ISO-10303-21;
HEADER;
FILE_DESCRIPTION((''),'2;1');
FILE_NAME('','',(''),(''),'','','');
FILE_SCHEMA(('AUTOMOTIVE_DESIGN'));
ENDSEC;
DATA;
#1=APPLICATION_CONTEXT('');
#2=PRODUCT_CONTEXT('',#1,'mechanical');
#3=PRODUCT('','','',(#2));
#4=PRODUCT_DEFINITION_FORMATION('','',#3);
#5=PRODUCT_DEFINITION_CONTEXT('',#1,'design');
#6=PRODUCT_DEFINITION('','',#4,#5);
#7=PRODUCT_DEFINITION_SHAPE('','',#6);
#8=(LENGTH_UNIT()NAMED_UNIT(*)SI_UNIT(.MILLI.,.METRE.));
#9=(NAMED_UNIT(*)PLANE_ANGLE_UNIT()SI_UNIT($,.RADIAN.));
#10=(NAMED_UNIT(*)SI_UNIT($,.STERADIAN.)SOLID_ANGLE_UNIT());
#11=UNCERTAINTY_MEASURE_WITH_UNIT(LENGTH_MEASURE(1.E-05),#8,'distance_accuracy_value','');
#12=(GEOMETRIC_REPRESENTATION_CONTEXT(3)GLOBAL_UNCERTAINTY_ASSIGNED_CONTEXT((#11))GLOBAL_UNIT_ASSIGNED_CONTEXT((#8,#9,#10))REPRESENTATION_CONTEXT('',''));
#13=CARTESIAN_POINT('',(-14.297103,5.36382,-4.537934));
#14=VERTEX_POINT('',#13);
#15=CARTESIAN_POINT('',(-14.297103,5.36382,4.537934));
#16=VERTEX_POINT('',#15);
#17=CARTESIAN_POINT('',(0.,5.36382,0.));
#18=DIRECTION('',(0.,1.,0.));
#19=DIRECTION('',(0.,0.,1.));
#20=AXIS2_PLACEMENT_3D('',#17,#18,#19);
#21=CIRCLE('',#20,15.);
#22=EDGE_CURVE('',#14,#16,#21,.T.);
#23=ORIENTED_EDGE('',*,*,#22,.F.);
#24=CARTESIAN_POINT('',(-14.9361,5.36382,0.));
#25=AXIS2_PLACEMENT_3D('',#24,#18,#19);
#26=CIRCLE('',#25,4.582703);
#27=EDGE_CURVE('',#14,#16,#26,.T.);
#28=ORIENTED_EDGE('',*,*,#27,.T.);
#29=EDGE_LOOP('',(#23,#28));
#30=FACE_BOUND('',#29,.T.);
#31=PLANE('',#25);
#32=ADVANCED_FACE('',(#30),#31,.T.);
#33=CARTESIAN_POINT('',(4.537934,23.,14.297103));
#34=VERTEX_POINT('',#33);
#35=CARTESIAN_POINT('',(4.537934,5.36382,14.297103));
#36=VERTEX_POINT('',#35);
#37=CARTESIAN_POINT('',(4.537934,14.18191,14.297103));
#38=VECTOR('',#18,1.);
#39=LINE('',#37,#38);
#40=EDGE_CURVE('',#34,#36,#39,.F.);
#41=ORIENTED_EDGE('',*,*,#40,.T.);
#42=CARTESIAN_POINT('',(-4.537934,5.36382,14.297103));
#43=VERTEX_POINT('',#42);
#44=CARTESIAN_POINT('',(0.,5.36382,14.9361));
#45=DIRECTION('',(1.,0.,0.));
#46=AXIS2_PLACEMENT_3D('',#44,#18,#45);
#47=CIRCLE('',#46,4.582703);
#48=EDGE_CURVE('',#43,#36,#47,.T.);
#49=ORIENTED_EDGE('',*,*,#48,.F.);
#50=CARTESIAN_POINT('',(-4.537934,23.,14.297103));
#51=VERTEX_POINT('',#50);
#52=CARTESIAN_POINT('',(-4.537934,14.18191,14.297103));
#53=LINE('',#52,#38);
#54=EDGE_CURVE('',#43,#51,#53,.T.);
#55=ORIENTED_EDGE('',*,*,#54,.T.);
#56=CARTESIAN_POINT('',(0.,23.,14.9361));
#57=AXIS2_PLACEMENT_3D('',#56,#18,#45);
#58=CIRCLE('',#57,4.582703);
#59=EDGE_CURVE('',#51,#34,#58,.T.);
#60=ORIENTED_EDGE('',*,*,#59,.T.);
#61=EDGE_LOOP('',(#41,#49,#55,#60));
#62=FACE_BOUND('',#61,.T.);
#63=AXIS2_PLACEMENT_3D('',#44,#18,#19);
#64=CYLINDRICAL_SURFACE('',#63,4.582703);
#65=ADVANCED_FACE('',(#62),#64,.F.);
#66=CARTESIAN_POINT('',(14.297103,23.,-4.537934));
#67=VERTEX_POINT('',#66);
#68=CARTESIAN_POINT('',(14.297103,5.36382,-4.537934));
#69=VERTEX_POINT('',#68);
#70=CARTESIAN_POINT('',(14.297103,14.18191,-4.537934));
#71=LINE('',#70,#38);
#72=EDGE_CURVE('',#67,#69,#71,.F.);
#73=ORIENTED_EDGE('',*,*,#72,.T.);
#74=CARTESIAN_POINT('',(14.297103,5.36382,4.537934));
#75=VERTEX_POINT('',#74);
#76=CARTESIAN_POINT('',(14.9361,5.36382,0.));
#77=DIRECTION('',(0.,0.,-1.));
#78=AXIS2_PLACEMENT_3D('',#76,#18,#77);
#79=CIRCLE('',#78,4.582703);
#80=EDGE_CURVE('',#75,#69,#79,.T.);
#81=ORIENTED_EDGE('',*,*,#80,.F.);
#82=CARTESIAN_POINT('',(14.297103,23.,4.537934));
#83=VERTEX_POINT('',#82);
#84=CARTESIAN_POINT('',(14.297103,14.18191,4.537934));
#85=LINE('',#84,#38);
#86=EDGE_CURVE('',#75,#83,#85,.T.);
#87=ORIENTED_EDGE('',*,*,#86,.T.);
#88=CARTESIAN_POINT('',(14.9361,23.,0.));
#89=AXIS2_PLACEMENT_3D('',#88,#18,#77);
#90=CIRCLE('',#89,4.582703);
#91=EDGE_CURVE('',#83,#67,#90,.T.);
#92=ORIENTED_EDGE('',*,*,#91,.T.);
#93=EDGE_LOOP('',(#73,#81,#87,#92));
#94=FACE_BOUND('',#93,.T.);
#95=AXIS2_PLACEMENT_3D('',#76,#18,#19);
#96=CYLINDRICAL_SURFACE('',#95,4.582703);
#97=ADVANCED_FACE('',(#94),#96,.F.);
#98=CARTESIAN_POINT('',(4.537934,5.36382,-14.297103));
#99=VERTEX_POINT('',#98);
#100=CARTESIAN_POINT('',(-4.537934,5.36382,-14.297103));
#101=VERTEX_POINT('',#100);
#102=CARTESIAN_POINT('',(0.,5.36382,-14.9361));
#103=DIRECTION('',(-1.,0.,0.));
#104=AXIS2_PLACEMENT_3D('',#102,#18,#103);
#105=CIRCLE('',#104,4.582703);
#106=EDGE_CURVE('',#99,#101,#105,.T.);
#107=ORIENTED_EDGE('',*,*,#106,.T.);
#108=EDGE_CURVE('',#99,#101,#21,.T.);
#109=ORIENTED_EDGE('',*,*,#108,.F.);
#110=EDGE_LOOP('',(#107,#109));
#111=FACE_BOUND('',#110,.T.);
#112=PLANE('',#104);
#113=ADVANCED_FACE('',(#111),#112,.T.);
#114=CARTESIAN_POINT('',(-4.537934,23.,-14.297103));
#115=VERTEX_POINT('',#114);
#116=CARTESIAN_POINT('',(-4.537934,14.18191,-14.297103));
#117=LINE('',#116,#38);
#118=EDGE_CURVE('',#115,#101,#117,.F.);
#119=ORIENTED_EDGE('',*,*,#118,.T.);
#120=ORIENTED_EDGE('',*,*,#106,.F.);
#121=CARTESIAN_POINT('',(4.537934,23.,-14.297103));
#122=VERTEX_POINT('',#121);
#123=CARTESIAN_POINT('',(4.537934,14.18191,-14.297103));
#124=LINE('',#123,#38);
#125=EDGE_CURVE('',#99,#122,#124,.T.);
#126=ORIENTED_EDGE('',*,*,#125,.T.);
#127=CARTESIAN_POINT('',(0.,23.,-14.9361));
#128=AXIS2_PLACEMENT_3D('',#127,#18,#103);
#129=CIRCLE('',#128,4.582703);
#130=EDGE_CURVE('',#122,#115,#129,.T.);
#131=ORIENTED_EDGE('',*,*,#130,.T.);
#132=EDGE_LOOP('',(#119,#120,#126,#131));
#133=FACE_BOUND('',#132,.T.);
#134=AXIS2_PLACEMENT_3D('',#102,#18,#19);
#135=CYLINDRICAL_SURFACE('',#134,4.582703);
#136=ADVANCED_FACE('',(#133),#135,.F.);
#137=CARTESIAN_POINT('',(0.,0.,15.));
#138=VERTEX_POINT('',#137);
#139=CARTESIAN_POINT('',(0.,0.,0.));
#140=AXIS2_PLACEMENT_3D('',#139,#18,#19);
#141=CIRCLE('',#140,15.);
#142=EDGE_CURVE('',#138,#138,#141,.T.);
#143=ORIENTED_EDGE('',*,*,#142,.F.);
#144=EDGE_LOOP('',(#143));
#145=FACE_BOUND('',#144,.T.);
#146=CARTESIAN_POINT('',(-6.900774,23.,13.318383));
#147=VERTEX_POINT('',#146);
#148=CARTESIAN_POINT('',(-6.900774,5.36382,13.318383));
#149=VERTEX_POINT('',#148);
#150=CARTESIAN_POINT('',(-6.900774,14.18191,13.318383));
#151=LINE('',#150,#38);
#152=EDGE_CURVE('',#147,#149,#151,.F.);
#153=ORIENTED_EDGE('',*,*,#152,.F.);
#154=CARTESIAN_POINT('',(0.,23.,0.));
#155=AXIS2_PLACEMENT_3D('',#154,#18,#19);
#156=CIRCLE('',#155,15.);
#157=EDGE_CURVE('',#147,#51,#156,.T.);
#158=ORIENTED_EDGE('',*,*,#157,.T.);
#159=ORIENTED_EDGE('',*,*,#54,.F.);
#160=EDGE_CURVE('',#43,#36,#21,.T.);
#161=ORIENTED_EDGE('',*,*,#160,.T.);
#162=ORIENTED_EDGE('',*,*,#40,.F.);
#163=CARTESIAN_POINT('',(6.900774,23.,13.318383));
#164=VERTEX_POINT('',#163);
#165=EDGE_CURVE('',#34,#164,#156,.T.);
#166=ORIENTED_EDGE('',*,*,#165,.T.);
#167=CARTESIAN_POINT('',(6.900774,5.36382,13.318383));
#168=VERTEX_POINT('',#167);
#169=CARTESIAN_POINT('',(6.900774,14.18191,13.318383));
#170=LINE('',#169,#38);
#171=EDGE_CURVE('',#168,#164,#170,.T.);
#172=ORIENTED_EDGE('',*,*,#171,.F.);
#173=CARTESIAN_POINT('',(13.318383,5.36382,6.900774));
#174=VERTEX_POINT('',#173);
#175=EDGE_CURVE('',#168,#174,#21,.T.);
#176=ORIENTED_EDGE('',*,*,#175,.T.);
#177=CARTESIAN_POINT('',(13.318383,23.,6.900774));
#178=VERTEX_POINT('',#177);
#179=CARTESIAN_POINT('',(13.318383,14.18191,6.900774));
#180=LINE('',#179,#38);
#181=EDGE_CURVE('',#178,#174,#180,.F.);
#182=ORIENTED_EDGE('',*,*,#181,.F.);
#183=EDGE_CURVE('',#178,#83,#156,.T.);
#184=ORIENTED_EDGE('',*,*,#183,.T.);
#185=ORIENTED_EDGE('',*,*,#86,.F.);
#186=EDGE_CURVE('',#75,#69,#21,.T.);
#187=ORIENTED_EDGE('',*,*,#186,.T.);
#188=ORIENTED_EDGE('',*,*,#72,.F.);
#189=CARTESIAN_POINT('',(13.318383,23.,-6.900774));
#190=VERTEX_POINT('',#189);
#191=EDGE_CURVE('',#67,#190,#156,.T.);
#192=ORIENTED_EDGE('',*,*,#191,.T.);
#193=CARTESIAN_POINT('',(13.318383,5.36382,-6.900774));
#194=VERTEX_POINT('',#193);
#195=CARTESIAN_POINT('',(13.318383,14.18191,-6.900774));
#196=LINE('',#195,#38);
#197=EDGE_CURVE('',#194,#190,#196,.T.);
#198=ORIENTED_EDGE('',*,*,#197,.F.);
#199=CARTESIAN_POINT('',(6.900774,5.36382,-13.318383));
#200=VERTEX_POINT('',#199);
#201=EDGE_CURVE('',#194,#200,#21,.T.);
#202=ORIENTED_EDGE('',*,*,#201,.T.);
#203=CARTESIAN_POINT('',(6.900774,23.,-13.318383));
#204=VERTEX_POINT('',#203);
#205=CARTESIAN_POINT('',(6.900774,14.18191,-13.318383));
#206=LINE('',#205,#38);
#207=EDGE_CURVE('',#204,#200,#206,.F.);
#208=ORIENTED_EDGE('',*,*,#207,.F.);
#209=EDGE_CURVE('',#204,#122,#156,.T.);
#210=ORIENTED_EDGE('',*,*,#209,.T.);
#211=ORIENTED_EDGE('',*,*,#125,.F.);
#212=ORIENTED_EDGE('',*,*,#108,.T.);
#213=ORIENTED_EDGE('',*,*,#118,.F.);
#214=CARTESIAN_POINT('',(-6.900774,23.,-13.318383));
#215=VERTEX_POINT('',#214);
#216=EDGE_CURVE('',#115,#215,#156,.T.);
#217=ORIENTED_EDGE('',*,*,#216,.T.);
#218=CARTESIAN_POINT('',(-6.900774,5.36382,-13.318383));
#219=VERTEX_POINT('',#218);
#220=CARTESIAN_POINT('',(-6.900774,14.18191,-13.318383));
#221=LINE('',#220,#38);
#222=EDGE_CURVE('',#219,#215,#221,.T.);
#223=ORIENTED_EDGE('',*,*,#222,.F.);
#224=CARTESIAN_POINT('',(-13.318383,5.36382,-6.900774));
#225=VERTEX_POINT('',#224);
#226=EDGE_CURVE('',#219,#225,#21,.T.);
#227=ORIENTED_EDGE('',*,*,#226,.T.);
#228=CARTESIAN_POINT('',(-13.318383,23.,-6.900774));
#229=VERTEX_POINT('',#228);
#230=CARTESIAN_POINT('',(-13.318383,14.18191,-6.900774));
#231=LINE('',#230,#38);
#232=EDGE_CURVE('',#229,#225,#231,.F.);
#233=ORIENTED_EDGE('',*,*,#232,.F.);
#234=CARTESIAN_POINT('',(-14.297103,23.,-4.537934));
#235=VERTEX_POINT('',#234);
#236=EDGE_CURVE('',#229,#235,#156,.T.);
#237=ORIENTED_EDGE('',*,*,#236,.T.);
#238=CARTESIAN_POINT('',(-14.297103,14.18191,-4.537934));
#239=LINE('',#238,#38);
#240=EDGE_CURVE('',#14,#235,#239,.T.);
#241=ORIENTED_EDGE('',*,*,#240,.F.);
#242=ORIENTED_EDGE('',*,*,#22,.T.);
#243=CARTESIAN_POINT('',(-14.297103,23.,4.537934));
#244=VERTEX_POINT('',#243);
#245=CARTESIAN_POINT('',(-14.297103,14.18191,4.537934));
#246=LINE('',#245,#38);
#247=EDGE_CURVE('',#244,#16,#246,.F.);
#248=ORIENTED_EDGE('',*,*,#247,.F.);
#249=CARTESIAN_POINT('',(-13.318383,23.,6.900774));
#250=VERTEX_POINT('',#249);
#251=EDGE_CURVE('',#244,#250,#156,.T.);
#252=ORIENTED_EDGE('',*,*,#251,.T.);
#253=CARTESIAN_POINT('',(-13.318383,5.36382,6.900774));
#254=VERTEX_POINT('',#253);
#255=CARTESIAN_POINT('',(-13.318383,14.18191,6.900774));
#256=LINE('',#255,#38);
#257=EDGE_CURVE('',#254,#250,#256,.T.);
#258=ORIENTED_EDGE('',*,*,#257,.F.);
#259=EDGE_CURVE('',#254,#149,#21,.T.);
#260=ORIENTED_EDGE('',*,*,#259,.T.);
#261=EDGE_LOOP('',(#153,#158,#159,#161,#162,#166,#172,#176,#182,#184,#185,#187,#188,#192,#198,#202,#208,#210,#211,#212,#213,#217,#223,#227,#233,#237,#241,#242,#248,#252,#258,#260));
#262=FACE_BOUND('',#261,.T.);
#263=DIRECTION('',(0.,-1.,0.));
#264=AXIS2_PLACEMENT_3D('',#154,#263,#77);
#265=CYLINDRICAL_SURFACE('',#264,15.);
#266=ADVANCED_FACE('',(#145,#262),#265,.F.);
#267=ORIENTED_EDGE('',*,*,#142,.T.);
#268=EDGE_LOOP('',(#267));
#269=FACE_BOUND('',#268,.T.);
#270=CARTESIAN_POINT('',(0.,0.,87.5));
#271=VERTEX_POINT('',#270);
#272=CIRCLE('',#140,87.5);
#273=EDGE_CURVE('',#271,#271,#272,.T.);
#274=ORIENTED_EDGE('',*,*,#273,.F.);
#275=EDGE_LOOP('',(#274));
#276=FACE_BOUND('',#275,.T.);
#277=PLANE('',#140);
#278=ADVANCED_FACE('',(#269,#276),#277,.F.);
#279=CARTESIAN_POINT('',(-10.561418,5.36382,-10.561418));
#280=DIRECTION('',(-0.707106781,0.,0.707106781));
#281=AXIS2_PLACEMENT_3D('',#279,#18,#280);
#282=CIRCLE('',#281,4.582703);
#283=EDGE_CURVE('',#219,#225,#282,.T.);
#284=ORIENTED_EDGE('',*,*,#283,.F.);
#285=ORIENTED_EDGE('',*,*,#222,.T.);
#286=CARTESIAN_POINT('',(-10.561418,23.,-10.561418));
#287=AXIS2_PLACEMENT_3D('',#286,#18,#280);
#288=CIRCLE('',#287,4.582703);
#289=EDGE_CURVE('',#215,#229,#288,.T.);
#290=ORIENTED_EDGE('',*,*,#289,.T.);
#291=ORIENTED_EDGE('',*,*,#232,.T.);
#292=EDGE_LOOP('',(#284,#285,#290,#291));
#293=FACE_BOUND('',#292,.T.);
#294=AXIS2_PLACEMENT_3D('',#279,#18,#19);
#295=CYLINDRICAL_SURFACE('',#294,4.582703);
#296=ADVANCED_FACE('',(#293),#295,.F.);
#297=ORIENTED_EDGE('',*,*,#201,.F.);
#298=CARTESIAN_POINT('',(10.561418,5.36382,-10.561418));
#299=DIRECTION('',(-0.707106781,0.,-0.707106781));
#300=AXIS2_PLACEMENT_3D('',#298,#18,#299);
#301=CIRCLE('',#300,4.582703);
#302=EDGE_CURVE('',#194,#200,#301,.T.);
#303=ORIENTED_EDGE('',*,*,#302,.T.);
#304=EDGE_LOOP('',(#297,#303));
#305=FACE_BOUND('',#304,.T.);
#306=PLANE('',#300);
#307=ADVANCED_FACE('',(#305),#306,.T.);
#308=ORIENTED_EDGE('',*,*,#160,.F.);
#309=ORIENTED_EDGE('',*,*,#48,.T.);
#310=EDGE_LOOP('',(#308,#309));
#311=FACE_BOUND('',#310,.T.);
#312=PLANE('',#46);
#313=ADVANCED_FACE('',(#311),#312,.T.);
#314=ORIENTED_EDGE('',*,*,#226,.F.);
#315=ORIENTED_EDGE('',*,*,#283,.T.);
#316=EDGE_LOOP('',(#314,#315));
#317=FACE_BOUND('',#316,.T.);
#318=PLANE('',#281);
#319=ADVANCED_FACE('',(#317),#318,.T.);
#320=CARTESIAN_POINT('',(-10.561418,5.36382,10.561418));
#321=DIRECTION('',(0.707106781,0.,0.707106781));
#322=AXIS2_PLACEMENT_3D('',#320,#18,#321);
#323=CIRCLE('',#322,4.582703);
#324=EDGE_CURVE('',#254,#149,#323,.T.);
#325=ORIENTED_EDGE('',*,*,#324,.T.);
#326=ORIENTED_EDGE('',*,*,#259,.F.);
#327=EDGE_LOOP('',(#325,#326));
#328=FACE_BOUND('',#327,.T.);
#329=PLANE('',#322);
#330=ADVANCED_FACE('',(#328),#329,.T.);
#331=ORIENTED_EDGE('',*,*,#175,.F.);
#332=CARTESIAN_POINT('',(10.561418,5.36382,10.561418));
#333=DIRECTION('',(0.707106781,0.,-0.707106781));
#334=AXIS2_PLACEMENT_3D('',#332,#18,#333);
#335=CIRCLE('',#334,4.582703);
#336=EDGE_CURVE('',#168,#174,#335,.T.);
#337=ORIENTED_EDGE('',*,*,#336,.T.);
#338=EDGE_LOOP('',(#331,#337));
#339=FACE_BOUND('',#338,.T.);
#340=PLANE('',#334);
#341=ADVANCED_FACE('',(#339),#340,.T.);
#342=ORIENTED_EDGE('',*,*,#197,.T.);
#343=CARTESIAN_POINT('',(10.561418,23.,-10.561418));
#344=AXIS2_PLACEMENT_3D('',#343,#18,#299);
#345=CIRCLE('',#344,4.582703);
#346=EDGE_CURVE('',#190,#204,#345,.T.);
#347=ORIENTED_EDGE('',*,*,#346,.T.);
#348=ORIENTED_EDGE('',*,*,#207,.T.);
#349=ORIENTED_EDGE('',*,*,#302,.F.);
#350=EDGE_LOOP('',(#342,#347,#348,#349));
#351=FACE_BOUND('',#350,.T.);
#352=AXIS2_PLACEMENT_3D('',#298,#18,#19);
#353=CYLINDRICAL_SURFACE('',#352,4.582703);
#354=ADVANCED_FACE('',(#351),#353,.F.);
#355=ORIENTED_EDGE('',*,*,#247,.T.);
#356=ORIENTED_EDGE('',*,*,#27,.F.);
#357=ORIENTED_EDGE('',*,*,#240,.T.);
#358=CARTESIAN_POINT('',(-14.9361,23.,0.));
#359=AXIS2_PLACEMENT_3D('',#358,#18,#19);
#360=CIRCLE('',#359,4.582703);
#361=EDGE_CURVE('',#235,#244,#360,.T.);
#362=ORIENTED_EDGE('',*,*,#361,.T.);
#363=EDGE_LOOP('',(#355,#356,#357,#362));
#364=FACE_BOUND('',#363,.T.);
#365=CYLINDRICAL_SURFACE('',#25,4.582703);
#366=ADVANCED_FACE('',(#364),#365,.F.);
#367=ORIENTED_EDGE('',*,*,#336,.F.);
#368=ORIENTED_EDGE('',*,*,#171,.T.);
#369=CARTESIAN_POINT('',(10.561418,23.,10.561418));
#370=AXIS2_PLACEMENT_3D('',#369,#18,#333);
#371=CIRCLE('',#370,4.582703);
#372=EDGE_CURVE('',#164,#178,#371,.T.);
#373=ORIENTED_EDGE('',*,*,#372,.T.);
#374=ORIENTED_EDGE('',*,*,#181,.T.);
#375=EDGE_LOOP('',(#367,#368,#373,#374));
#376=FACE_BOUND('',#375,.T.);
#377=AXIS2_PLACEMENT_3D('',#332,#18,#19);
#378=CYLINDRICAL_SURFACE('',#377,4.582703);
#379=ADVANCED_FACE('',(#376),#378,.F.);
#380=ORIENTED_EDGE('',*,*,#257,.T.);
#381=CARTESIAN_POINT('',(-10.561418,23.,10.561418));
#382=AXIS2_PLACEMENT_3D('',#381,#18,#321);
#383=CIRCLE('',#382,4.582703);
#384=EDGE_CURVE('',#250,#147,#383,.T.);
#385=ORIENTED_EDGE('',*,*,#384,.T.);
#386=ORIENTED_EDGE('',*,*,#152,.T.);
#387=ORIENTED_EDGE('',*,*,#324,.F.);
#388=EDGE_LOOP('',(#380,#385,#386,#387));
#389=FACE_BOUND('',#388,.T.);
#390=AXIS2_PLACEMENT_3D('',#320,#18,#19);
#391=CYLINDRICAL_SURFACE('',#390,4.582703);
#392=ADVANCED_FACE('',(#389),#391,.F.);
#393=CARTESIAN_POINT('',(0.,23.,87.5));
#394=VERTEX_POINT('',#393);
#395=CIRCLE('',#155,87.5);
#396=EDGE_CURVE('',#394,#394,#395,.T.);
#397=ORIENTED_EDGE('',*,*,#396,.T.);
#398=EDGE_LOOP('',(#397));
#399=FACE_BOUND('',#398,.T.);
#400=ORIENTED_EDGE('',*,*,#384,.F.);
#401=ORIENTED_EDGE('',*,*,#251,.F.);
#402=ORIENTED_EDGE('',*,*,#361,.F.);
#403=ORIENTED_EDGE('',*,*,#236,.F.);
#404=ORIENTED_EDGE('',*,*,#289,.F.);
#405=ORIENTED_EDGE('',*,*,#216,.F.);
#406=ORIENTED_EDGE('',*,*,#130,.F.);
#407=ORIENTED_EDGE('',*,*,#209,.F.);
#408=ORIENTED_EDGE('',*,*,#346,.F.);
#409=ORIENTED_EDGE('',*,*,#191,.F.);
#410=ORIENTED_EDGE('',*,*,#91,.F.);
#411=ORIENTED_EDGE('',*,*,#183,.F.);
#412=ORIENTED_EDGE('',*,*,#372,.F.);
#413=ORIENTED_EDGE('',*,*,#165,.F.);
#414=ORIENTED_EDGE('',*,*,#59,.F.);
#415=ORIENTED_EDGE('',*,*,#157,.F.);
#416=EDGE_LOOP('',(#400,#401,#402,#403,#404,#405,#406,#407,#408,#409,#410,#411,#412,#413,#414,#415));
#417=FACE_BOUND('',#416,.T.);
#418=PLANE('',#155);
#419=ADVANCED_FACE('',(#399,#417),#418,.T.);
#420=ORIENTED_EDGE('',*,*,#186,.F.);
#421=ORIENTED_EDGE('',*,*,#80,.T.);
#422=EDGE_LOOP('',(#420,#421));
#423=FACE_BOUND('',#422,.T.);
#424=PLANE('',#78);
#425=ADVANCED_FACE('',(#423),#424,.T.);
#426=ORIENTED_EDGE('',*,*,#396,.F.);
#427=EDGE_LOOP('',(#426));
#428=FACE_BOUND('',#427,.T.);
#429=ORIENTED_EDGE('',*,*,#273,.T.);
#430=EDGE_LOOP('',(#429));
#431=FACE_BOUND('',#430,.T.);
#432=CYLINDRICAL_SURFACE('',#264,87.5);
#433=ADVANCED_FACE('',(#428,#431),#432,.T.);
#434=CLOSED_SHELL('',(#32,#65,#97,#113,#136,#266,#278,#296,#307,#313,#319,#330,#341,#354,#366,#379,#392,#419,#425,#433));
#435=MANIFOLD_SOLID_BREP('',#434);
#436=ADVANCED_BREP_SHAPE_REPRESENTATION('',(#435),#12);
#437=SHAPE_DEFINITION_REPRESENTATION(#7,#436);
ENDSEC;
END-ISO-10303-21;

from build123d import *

# Parameters (mm, degrees)
SKETCH1_R           = 87.5
BOSS_EXTRUDE1_DEPTH = 23
SKETCH2_R           = 15
CUT_EXTRUDE1_DEPTH  = 126.863020781
SKETCH3_R           = 4.582702808
CUT_EXTRUDE2_DEPTH  = 17.636179608
CIRPATTERN1_COUNT   = 8


with BuildPart() as part:
    # Sketch1 → Boss-Extrude1 (new body)
    with BuildSketch(Plane(origin=(0, 0, 0), x_dir=(1, 0, 0), z_dir=(0, 1, 0))):
        Circle(SKETCH1_R)
    extrude(amount=BOSS_EXTRUDE1_DEPTH)

    # Sketch2 → Cut-Extrude1 (cut, through all)
    with BuildSketch(Plane(origin=(0, 0, 0), x_dir=(1, 0, 0), z_dir=(0, 1, 0))):
        Circle(SKETCH2_R)
    extrude(amount=CUT_EXTRUDE1_DEPTH, mode=Mode.SUBTRACT)

    # Sketch3 → Cut-Extrude2 (cut)
    with BuildSketch(Plane(origin=(0, 23, 0), x_dir=(1, 0, 0), z_dir=(0, 1, 0))):
        with Locations((-14.936100105, 0)):
            Circle(SKETCH3_R)
    cut_extrude2 = extrude(amount=-CUT_EXTRUDE2_DEPTH, mode=Mode.SUBTRACT)

    # CirPattern1: Cut-Extrude2 ×8 about axis
    cirpattern1_axis = Axis((0, 0, 0), (0, 1, 0))
    for i in range(1, CIRPATTERN1_COUNT):
        add(cut_extrude2.rotate(cirpattern1_axis, i * 360 / CIRPATTERN1_COUNT), mode=Mode.SUBTRACT)


solid = part.part
